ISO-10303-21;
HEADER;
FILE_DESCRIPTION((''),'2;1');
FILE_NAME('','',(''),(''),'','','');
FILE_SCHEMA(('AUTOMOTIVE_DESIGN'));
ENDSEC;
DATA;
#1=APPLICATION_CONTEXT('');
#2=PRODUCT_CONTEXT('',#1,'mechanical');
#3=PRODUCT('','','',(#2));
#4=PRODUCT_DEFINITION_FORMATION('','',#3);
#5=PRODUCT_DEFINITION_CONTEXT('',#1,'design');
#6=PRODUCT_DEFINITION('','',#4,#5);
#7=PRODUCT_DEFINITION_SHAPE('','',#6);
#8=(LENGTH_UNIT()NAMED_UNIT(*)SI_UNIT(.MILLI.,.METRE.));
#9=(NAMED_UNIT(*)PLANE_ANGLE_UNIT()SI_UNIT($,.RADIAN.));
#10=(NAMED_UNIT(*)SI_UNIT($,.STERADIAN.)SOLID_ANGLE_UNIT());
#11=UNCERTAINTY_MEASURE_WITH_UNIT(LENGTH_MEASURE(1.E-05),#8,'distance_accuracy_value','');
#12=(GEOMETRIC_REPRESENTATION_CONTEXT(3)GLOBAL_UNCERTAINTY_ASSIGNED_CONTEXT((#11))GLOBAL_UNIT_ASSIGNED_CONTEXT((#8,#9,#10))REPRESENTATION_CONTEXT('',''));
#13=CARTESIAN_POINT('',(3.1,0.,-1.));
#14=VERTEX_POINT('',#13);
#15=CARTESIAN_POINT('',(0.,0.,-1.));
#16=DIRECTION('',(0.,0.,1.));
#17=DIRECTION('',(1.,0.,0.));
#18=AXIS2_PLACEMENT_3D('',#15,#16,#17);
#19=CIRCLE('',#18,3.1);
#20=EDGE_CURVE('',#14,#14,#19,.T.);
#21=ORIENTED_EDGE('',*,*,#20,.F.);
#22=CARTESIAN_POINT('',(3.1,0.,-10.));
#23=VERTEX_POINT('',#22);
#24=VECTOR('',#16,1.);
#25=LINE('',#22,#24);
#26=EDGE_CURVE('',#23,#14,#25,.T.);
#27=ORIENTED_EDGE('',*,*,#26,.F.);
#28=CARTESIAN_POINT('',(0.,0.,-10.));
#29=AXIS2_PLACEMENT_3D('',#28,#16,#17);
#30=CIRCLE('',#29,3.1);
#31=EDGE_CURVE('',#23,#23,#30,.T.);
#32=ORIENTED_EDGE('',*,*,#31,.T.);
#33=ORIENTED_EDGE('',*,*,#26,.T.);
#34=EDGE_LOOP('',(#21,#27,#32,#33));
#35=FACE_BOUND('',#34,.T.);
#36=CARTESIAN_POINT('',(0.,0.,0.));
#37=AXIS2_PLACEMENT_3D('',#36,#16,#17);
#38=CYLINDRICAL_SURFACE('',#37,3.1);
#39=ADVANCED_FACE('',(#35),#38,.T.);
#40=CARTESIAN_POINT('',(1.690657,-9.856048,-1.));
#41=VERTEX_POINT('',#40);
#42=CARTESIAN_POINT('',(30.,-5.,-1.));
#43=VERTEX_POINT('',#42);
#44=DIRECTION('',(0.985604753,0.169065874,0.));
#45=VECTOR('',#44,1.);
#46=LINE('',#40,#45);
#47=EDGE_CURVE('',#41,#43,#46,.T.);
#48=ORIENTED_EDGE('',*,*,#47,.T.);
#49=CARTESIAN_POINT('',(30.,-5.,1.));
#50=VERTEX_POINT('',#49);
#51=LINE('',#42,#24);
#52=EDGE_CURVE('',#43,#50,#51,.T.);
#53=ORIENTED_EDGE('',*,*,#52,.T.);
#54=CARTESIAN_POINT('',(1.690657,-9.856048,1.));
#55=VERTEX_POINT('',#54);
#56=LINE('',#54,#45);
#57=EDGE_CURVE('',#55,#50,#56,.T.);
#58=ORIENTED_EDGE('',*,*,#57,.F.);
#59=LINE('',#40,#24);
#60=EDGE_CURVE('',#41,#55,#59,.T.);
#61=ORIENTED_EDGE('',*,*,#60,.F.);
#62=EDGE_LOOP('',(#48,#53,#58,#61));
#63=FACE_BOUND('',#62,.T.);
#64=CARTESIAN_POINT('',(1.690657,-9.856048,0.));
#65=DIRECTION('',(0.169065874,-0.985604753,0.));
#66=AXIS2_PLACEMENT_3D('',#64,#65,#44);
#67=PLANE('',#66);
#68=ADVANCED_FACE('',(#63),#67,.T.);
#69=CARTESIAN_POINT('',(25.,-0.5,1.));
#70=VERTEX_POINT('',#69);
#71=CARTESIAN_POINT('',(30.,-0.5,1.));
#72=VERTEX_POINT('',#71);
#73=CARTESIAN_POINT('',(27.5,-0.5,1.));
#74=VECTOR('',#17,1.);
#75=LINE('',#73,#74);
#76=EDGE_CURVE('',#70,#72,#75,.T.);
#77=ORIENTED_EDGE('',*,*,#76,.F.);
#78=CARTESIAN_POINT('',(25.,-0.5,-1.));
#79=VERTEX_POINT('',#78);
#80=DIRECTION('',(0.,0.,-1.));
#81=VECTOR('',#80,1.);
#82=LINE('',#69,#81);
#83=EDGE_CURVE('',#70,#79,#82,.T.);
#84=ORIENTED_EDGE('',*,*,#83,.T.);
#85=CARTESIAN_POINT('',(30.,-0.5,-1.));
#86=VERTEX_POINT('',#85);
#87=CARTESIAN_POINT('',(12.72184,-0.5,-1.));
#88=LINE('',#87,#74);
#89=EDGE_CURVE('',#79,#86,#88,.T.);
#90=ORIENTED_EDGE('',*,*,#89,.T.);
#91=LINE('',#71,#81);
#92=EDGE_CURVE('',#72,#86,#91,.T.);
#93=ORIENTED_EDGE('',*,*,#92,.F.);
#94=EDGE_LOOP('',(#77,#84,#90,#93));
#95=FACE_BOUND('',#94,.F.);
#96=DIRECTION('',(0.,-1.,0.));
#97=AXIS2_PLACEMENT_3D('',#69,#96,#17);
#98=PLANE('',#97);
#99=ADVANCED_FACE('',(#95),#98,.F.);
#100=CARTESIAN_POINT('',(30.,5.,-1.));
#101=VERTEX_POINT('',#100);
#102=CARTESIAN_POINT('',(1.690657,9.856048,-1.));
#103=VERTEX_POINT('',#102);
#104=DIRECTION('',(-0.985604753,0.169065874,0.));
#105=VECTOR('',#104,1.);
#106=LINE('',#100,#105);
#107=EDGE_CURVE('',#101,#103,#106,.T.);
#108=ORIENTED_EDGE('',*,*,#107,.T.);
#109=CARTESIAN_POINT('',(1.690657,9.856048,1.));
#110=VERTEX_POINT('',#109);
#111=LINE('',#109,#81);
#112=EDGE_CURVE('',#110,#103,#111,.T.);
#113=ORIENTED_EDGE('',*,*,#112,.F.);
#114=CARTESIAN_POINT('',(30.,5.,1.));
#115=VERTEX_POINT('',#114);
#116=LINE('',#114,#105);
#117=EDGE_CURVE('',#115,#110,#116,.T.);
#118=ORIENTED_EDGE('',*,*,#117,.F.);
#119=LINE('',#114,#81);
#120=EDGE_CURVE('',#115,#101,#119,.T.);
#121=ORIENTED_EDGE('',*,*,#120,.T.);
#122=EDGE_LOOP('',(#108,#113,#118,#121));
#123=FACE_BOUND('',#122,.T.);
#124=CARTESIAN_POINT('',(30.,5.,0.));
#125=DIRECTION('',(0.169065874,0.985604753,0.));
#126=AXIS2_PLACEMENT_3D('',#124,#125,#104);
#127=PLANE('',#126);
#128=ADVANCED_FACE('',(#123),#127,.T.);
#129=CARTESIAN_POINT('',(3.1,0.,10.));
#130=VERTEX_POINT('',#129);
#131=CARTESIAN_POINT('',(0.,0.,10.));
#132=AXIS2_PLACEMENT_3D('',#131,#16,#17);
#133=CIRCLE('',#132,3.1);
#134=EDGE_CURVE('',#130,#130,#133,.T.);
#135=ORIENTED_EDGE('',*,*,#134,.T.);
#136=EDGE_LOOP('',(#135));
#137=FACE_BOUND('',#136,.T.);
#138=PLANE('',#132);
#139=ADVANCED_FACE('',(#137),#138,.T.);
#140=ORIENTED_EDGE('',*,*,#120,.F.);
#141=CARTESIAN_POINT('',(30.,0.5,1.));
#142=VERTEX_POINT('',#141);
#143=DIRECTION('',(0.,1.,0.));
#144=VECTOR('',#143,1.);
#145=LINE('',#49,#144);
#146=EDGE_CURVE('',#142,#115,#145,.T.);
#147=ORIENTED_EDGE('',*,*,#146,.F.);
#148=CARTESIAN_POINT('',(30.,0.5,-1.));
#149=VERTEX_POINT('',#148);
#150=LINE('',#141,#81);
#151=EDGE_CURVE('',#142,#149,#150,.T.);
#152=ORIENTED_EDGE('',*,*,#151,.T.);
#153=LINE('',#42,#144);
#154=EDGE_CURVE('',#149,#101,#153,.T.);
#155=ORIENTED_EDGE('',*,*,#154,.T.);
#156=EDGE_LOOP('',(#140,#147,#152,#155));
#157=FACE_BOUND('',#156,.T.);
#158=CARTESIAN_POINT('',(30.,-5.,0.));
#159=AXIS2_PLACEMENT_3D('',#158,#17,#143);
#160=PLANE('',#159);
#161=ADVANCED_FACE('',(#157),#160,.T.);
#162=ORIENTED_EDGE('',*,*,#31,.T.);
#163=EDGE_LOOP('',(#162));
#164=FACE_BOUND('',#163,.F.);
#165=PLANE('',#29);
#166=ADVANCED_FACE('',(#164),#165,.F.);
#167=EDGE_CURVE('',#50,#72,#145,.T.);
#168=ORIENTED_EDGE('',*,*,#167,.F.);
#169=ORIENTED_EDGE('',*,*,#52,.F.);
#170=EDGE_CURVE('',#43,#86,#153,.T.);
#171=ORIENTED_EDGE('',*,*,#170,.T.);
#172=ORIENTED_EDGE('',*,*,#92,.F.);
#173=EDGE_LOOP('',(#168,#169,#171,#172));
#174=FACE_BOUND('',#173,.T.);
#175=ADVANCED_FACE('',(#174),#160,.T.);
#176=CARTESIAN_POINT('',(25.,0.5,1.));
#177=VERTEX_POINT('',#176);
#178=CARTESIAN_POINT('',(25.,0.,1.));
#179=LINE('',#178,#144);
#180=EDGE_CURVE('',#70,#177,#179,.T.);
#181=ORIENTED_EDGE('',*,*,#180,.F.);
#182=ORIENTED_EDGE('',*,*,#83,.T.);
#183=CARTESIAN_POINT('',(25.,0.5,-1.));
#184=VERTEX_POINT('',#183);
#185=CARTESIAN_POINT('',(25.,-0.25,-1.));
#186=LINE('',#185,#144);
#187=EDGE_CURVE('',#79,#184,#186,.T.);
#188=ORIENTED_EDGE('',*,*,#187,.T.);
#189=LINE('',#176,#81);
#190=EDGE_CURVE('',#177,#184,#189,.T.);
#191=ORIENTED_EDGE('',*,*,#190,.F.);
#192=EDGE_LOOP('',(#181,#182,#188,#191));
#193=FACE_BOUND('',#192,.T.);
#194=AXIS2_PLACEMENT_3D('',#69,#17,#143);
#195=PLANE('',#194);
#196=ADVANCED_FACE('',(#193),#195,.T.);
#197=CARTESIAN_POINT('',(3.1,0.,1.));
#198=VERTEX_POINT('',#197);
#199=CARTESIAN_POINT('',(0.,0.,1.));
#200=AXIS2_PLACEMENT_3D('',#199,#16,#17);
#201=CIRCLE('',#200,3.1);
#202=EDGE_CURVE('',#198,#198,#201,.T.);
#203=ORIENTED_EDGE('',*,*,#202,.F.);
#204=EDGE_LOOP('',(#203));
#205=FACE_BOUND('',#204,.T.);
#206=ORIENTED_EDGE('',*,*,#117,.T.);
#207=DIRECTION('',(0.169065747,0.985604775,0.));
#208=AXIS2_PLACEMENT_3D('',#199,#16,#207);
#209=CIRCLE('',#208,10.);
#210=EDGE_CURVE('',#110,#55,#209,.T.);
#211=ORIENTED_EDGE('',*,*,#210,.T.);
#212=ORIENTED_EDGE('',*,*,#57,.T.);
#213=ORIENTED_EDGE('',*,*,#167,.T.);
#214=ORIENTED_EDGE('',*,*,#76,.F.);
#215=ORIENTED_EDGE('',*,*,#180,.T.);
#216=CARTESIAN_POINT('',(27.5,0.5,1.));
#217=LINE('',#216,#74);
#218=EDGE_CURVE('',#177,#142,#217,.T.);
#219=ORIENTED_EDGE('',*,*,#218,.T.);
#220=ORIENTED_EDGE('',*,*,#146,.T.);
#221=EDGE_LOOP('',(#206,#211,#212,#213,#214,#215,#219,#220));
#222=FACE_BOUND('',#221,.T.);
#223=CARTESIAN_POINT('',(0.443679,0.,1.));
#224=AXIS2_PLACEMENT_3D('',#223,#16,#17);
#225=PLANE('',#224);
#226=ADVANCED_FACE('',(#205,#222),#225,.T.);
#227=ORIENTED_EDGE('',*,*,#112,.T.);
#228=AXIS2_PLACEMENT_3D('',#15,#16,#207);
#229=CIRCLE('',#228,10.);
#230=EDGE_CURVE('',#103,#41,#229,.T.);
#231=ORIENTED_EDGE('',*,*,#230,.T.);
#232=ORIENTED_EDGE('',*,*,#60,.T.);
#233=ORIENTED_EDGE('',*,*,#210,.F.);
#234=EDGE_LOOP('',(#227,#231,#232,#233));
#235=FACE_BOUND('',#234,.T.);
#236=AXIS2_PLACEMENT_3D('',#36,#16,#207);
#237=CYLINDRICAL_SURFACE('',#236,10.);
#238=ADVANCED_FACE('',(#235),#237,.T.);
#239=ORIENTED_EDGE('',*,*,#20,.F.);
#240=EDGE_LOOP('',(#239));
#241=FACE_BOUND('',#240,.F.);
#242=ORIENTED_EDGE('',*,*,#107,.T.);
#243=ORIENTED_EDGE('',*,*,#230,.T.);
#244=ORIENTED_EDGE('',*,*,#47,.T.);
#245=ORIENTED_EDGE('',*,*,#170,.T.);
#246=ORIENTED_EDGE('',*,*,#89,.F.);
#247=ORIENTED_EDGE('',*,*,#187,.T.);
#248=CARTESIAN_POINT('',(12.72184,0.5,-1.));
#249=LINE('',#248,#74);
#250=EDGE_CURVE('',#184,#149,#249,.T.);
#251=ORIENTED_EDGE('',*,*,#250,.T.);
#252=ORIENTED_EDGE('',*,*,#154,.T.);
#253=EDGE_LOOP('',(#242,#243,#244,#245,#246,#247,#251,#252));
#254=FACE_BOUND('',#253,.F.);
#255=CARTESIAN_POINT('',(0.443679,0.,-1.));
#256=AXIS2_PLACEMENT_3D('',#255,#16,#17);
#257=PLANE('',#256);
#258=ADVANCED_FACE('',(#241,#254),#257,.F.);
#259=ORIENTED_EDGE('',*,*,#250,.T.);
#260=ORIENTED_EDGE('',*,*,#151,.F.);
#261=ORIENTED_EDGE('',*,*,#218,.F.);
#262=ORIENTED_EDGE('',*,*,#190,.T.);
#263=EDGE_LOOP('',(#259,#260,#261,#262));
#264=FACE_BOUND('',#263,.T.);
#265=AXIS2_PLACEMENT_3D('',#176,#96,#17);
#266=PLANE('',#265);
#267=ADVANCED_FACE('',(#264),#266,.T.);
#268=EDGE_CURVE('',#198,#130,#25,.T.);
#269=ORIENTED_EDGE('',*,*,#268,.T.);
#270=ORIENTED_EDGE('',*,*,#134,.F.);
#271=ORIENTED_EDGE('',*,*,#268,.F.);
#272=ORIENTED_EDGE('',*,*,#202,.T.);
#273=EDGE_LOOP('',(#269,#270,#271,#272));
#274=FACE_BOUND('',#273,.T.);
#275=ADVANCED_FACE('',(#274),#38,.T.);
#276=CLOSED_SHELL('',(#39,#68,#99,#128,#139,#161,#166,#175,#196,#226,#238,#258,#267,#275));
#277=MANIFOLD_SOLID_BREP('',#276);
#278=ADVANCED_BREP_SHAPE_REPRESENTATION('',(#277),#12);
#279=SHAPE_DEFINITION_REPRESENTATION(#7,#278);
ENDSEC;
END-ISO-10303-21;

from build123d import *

# Parameters (mm, degrees)
F0_R     = 3.1
F1_DEPTH = 10
F2_DEPTH = 1
F3_W     = 5
F3_H     = 1
F4_DEPTH = 11.001


# Not quite as in the source:
# - a feature names something its author has since deleted; it is built from what else it names


with BuildPart() as f1:
    # F0 (on Top) → F1 (new body, symmetric)
    with BuildSketch(Plane.XY):
        Circle(F0_R)
    extrude(amount=F1_DEPTH, both=True)

    # F0 (on Top) → F2 (join, symmetric)
    with BuildSketch(Plane.XY):
        with BuildLine():
            ThreePointArc((1.6906573106, -9.8560477808), (7.645474907, -6.4456740103), (10, 0))
            ThreePointArc((10, 0), (7.6454749578, 6.44567395), (1.6906574661, 9.8560477542))
            ThreePointArc((1.6906574661, 9.8560477542), (-10, 7.89e-08), (1.6906573106, -9.8560477808))
        make_face()
        Circle(F0_R, mode=Mode.SUBTRACT)
        with BuildLine():
            ThreePointArc((1.6906574661, 9.8560477542), (7.6454749578, 6.44567395), (10, 0))
            ThreePointArc((10, 0), (7.645474907, -6.4456740103), (1.6906573106, -9.8560477808))
            Line((1.6906573106, -9.8560477808), (30, -5))
            Line((30, -5), (30, 5))
            Line((30, 5), (1.6906574661, 9.8560477542))
        make_face()
    extrude(amount=F2_DEPTH, both=True)

    # F3 (on face) → F4 (cut, through all)
    with BuildSketch(Plane.XY.offset(1)):
        with Locations((27.5, 0)):
            Rectangle(F3_W, F3_H)
    extrude(amount=-F4_DEPTH, mode=Mode.SUBTRACT)


solid = f1.part
